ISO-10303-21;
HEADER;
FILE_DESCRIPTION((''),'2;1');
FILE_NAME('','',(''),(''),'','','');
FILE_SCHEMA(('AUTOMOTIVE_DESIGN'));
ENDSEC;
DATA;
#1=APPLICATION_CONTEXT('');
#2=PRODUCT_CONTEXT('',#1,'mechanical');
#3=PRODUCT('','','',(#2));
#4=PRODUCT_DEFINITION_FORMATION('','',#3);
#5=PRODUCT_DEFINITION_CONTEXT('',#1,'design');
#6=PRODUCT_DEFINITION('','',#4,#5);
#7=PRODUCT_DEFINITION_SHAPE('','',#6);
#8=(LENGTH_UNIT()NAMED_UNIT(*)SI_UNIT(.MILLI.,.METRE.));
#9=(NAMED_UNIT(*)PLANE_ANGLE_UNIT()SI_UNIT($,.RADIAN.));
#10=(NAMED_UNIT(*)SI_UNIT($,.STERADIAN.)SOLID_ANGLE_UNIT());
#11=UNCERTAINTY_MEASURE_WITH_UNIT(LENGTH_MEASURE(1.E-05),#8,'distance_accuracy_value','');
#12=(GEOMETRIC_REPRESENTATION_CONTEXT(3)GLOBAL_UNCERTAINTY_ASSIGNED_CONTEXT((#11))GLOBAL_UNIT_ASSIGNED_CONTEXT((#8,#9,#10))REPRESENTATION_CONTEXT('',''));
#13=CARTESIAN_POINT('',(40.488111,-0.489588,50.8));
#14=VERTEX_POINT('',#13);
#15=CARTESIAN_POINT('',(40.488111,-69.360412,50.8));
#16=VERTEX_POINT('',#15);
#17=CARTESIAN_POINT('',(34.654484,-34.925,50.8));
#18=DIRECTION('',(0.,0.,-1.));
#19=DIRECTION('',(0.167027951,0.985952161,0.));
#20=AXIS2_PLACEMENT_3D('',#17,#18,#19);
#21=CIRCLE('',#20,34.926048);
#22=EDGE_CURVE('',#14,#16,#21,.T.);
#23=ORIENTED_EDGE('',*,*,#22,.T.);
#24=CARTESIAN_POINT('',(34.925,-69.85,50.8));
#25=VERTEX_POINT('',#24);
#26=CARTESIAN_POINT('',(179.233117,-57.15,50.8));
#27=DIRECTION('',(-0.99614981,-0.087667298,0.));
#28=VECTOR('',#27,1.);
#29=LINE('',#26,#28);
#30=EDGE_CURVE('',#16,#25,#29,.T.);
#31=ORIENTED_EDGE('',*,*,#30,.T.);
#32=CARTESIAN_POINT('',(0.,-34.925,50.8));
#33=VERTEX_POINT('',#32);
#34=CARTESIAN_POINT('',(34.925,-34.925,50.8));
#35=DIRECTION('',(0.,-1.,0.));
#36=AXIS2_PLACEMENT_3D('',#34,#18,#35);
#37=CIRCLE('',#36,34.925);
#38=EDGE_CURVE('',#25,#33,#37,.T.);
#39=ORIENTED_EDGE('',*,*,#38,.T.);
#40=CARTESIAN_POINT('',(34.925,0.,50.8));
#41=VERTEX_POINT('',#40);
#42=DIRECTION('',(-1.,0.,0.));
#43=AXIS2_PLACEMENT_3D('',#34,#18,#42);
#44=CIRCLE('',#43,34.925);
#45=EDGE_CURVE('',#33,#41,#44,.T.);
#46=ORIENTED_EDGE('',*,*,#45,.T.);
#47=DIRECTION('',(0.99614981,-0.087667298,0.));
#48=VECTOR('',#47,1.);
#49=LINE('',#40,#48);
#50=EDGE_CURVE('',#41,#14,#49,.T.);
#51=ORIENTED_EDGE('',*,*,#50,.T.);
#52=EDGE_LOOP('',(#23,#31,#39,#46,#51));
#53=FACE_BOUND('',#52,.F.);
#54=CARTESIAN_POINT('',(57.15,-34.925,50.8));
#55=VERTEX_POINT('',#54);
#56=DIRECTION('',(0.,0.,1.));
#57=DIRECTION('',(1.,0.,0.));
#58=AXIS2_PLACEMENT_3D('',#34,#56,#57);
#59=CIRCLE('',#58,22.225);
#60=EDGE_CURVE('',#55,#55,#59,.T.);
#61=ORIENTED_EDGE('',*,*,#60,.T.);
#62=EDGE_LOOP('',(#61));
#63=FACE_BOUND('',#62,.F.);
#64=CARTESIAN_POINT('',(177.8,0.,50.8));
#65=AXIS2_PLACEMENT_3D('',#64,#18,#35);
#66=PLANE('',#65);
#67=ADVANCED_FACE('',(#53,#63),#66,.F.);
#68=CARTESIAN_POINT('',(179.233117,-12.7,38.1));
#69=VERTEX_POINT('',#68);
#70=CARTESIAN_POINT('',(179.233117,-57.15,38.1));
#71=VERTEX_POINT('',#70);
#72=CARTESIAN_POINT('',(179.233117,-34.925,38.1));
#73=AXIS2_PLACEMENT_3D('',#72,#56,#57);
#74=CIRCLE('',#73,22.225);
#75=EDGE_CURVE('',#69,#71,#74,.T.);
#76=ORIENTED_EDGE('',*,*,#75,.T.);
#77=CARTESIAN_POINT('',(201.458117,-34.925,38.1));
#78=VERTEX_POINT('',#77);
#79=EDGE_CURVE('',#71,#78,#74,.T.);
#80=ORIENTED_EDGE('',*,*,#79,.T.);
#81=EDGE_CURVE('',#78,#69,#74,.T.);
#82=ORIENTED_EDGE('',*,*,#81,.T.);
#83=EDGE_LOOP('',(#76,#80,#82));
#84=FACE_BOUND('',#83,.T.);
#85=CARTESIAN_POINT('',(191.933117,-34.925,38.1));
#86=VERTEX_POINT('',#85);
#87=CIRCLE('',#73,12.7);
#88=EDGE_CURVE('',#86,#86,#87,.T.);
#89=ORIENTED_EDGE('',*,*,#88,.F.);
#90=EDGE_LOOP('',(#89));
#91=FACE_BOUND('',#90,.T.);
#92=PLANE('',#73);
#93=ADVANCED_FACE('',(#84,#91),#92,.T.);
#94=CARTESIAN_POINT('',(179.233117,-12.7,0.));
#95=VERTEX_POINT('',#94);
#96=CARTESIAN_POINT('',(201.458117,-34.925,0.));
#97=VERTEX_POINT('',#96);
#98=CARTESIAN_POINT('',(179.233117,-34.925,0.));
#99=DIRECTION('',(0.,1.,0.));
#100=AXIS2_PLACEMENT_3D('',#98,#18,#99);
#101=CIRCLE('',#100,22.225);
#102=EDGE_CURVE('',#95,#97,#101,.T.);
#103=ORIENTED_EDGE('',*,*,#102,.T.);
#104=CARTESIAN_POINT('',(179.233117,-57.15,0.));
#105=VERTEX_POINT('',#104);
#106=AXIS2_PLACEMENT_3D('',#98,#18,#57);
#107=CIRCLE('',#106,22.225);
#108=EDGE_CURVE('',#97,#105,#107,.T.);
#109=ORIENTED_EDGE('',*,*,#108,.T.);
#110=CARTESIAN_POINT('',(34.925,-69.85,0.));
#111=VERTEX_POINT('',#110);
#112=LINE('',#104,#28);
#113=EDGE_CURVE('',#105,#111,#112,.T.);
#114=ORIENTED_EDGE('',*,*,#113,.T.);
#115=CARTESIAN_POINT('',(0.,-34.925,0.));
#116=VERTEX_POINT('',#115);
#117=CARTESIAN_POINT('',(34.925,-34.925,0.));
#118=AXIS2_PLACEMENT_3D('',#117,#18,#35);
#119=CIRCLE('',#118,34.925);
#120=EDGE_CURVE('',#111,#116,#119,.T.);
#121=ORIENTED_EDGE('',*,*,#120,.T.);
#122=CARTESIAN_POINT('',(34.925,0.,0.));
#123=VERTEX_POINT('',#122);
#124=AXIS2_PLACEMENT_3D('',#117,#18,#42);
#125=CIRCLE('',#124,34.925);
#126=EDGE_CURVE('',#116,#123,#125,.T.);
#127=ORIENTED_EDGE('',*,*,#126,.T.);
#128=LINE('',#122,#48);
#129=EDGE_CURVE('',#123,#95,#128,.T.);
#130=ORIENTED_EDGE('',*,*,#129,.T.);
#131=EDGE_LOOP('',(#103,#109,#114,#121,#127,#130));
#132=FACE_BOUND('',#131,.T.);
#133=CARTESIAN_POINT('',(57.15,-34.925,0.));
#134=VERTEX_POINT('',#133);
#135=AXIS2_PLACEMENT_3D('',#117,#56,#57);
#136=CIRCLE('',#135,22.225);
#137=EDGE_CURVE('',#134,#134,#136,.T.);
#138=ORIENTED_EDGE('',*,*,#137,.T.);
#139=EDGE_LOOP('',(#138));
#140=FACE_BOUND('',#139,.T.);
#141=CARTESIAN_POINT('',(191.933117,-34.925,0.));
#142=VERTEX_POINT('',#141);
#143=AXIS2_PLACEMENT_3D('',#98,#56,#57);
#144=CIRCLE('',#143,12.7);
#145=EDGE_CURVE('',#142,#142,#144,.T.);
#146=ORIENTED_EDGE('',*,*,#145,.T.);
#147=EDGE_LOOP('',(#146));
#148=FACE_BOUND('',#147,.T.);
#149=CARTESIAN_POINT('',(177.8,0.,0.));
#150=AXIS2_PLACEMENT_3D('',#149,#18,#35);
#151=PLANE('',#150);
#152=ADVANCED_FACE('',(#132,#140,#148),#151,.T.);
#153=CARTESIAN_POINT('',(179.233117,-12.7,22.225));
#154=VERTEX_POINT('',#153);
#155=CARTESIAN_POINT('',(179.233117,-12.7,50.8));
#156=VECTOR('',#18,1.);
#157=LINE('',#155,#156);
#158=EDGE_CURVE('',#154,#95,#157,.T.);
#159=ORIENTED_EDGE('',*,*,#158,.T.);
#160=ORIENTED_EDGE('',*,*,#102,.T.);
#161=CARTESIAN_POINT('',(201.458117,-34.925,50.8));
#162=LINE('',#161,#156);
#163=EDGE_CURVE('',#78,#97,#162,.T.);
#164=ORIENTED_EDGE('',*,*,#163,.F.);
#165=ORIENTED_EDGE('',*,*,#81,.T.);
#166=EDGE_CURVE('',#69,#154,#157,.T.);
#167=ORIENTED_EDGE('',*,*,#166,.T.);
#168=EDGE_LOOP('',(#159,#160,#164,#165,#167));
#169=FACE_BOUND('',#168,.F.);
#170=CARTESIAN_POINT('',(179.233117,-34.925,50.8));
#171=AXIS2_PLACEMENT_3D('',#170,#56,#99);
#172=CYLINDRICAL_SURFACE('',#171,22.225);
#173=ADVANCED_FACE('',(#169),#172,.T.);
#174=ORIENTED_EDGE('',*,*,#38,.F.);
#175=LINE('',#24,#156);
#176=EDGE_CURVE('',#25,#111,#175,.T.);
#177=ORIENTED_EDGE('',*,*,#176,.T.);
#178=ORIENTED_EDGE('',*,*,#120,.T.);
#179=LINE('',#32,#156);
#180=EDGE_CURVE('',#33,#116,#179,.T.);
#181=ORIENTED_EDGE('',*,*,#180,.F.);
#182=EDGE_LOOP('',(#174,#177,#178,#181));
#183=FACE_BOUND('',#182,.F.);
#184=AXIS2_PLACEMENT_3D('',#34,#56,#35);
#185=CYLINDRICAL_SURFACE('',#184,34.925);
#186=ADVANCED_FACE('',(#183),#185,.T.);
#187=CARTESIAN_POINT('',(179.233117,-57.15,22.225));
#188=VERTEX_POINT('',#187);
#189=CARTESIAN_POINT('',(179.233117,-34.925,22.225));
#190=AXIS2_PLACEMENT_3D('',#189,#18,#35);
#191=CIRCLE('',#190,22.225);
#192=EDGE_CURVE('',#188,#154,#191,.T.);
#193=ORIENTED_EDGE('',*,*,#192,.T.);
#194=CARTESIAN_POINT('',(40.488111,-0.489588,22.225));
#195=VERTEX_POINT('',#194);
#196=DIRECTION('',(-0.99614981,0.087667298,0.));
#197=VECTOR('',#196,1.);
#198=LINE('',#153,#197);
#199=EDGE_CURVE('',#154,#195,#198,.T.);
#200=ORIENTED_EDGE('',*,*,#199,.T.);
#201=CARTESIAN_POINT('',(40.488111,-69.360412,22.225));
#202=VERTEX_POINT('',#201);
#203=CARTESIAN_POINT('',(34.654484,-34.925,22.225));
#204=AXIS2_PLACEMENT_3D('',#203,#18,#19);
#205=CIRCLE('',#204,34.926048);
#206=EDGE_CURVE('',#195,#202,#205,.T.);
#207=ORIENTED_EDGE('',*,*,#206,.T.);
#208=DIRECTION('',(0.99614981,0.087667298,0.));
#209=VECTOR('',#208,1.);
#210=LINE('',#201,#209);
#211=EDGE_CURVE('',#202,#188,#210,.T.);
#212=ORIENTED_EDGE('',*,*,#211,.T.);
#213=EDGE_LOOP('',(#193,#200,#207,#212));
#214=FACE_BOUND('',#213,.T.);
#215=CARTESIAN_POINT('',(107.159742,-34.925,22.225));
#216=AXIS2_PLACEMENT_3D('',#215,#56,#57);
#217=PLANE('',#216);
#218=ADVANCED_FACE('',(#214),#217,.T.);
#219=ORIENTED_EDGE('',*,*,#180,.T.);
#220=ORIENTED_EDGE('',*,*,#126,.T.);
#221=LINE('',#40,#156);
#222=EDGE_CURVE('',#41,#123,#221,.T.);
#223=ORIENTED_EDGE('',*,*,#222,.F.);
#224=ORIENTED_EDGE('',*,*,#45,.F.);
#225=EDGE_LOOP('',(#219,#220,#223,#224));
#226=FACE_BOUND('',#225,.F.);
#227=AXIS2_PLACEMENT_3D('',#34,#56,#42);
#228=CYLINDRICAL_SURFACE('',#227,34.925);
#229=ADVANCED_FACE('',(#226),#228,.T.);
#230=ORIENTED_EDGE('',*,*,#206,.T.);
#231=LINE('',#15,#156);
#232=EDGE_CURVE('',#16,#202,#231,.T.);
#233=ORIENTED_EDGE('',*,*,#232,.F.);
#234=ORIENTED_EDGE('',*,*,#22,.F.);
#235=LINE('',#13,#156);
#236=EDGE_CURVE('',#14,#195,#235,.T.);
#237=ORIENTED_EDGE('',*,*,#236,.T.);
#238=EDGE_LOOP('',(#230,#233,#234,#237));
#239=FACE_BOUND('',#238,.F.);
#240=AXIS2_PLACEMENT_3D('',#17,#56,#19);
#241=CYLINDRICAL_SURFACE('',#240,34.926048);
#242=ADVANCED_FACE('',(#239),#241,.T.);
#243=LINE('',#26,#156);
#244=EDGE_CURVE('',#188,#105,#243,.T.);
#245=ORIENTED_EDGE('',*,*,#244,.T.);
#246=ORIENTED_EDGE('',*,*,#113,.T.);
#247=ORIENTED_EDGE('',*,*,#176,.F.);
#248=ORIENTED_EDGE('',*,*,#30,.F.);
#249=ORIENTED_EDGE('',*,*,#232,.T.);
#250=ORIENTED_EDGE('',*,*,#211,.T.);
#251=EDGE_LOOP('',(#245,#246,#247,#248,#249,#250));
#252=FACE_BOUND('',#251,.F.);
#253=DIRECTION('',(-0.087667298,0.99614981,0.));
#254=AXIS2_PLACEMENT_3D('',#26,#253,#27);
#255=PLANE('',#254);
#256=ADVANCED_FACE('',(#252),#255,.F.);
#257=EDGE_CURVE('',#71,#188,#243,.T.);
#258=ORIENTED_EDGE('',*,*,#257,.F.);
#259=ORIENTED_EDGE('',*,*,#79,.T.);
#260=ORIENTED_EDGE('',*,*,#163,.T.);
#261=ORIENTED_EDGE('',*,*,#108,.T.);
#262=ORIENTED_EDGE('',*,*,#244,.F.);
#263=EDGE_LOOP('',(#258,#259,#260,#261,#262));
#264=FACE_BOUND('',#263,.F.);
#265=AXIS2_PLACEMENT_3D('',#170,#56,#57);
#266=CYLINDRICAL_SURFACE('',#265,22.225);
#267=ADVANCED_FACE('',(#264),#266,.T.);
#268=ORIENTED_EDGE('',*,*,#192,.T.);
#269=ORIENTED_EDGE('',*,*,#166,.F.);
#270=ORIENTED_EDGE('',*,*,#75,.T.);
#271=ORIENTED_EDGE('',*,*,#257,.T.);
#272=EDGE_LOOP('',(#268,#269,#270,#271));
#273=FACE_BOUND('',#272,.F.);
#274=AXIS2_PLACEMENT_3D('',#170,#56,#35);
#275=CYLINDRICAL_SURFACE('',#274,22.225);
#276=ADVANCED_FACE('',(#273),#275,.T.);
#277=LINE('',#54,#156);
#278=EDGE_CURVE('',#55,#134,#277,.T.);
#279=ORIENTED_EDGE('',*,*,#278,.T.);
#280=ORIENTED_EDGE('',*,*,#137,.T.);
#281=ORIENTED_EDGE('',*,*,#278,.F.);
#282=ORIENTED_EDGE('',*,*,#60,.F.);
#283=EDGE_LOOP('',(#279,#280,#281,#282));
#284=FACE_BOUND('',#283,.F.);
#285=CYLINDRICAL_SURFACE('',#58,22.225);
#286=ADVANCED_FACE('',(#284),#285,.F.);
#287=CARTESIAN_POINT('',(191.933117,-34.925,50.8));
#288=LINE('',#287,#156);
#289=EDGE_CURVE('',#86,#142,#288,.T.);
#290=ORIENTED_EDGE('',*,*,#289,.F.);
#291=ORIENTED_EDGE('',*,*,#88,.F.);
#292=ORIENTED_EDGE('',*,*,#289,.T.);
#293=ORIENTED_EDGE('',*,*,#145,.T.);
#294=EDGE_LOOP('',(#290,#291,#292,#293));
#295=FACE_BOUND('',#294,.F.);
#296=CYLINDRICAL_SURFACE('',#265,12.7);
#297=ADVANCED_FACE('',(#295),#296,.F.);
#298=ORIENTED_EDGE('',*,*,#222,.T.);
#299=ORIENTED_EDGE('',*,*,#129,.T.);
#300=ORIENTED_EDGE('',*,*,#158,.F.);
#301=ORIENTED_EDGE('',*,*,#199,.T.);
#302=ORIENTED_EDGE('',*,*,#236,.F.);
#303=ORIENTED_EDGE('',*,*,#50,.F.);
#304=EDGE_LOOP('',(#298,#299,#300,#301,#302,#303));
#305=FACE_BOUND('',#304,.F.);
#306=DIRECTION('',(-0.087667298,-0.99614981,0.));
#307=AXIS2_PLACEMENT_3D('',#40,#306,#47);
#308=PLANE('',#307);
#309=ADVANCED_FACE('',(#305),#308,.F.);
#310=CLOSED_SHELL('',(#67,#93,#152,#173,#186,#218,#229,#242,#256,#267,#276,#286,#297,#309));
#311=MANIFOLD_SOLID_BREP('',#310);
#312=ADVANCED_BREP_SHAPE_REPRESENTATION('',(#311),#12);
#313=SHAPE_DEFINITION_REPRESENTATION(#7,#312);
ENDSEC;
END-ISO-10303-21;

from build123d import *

# Parameters (mm, degrees)
F0_W      = 177.8
F0_H      = 50.8
F1_DEPTH  = 69.85
F3_DEPTH  = 50.8
F2_R      = 22.225
F4_DEPTH  = 50.8
F5_DEPTH  = 50.8
F7_DEPTH  = 50.8
F6_R      = 12.7
F8_DEPTH  = 50.8
F10_DEPTH = 50.8
F12_DEPTH = 28.575
F13_R     = 22.225
F14_DEPTH = 12.7


# Not quite as in the source:
# - ends of sketch curves that miss each other by under 0.0002 mm in the source are joined


with BuildPart() as f1:
    # F0 (on Front) → F1 (new body)
    with BuildSketch(Plane.XZ):
        with Locations((88.9, 25.4)):
            Rectangle(F0_W, F0_H)
    extrude(amount=F1_DEPTH)

    # F2 (on face) → F3 (cut, through all)
    with BuildSketch(Plane.XY.offset(50.8)):
        with BuildLine():
            Line((0, -69.85), (34.925, -69.85))
            ThreePointArc((34.925, -69.85), (10.2292956671, -59.6207043329), (0, -34.925))
            Line((0, -34.925), (0, -69.85))
        make_face()
        with BuildLine():
            ThreePointArc((0, -34.925), (10.2292957417, -10.2292955924), (34.9250002112, 0))
            Line((34.9250002112, 0), (0, 0))
            Line((0, 0), (0, -34.925))
        make_face()
    extrude(amount=-F3_DEPTH, mode=Mode.SUBTRACT)

    # F2 (on face) → F4 (cut, through all)
    with BuildSketch(Plane.XY.offset(50.8)):
        with Locations((34.925, -34.925)):
            Circle(F2_R)
    extrude(amount=-F4_DEPTH, mode=Mode.SUBTRACT)

    # F5 (add): a face of the model
    f5_faces = [f1.faces().sort_by_distance(p)[0] for p in [
        (177.8, -34.925, 25.4),
    ]]
    extrude(f5_faces, amount=F5_DEPTH)

    # F6 (on face) → F7 (cut, through all)
    with BuildSketch(Plane.XY.offset(50.8)):
        with BuildLine():
            Line((228.6, 0), (34.9250002112, 0))
            Line((34.9250002112, 0), (180.975, -10.3535739202))
            ThreePointArc((180.975, -10.3535739202), (203.8662068568, -34.925), (180.975, -59.4964260798))
            Line((180.975, -59.4964260798), (34.925, -69.85))
            Line((34.925, -69.85), (228.6, -69.85))
            Line((228.6, -69.85), (228.6, 0))
        make_face()
    extrude(amount=-F7_DEPTH, mode=Mode.SUBTRACT)

    # F6 (on face) → F8 (cut, through all)
    with BuildSketch(Plane.XY.offset(50.8)):
        with Locations((179.2331165612, -34.925)):
            Circle(F6_R)
    extrude(amount=-F8_DEPTH, mode=Mode.SUBTRACT)

    # F9 (on face) → F10 (cut, through all)
    with BuildSketch(Plane.XY.offset(50.8)):
        with BuildLine():
            ThreePointArc((179.2331165612, -12.7), (194.948564773, -19.2095517881), (201.4581165612, -34.925))
            ThreePointArc((201.4581165612, -34.925), (194.948564773, -50.6404482119), (179.2331165612, -57.15))
            Line((179.2331165612, -57.15), (34.925, -69.85))
            Line((34.925, -69.85), (180.975, -59.4964260798))
            ThreePointArc((180.975, -59.4964260798), (203.8662068568, -34.925), (180.975, -10.3535739202))
            Line((180.975, -10.3535739202), (34.9250002112, 0))
            Line((34.9250002112, 0), (179.2331165612, -12.7))
        make_face()
    extrude(amount=-F10_DEPTH, mode=Mode.SUBTRACT)

    # F11 (on face) → F12 (cut)
    with BuildSketch(Plane.XY.offset(50.8)):
        with BuildLine():
            ThreePointArc((40.4881105931, -0.4895878599), (69.5805320507, -34.9249998886), (40.4881108127, -69.3604121029))
            Line((40.4881108127, -69.3604121029), (179.2331165612, -57.15))
            ThreePointArc((179.2331165612, -57.15), (157.0081165612, -34.925), (179.2331165612, -12.7))
            Line((179.2331165612, -12.7), (40.4881105931, -0.4895878599))
        make_face()
    extrude(amount=-F12_DEPTH, mode=Mode.SUBTRACT)

    # F13 (on face) → F14 (cut)
    with BuildSketch(Plane.XY.offset(50.8)):
        with Locations((179.2331165612, -34.925)):
            Circle(F13_R)
    extrude(amount=-F14_DEPTH, mode=Mode.SUBTRACT)


solid = f1.part
